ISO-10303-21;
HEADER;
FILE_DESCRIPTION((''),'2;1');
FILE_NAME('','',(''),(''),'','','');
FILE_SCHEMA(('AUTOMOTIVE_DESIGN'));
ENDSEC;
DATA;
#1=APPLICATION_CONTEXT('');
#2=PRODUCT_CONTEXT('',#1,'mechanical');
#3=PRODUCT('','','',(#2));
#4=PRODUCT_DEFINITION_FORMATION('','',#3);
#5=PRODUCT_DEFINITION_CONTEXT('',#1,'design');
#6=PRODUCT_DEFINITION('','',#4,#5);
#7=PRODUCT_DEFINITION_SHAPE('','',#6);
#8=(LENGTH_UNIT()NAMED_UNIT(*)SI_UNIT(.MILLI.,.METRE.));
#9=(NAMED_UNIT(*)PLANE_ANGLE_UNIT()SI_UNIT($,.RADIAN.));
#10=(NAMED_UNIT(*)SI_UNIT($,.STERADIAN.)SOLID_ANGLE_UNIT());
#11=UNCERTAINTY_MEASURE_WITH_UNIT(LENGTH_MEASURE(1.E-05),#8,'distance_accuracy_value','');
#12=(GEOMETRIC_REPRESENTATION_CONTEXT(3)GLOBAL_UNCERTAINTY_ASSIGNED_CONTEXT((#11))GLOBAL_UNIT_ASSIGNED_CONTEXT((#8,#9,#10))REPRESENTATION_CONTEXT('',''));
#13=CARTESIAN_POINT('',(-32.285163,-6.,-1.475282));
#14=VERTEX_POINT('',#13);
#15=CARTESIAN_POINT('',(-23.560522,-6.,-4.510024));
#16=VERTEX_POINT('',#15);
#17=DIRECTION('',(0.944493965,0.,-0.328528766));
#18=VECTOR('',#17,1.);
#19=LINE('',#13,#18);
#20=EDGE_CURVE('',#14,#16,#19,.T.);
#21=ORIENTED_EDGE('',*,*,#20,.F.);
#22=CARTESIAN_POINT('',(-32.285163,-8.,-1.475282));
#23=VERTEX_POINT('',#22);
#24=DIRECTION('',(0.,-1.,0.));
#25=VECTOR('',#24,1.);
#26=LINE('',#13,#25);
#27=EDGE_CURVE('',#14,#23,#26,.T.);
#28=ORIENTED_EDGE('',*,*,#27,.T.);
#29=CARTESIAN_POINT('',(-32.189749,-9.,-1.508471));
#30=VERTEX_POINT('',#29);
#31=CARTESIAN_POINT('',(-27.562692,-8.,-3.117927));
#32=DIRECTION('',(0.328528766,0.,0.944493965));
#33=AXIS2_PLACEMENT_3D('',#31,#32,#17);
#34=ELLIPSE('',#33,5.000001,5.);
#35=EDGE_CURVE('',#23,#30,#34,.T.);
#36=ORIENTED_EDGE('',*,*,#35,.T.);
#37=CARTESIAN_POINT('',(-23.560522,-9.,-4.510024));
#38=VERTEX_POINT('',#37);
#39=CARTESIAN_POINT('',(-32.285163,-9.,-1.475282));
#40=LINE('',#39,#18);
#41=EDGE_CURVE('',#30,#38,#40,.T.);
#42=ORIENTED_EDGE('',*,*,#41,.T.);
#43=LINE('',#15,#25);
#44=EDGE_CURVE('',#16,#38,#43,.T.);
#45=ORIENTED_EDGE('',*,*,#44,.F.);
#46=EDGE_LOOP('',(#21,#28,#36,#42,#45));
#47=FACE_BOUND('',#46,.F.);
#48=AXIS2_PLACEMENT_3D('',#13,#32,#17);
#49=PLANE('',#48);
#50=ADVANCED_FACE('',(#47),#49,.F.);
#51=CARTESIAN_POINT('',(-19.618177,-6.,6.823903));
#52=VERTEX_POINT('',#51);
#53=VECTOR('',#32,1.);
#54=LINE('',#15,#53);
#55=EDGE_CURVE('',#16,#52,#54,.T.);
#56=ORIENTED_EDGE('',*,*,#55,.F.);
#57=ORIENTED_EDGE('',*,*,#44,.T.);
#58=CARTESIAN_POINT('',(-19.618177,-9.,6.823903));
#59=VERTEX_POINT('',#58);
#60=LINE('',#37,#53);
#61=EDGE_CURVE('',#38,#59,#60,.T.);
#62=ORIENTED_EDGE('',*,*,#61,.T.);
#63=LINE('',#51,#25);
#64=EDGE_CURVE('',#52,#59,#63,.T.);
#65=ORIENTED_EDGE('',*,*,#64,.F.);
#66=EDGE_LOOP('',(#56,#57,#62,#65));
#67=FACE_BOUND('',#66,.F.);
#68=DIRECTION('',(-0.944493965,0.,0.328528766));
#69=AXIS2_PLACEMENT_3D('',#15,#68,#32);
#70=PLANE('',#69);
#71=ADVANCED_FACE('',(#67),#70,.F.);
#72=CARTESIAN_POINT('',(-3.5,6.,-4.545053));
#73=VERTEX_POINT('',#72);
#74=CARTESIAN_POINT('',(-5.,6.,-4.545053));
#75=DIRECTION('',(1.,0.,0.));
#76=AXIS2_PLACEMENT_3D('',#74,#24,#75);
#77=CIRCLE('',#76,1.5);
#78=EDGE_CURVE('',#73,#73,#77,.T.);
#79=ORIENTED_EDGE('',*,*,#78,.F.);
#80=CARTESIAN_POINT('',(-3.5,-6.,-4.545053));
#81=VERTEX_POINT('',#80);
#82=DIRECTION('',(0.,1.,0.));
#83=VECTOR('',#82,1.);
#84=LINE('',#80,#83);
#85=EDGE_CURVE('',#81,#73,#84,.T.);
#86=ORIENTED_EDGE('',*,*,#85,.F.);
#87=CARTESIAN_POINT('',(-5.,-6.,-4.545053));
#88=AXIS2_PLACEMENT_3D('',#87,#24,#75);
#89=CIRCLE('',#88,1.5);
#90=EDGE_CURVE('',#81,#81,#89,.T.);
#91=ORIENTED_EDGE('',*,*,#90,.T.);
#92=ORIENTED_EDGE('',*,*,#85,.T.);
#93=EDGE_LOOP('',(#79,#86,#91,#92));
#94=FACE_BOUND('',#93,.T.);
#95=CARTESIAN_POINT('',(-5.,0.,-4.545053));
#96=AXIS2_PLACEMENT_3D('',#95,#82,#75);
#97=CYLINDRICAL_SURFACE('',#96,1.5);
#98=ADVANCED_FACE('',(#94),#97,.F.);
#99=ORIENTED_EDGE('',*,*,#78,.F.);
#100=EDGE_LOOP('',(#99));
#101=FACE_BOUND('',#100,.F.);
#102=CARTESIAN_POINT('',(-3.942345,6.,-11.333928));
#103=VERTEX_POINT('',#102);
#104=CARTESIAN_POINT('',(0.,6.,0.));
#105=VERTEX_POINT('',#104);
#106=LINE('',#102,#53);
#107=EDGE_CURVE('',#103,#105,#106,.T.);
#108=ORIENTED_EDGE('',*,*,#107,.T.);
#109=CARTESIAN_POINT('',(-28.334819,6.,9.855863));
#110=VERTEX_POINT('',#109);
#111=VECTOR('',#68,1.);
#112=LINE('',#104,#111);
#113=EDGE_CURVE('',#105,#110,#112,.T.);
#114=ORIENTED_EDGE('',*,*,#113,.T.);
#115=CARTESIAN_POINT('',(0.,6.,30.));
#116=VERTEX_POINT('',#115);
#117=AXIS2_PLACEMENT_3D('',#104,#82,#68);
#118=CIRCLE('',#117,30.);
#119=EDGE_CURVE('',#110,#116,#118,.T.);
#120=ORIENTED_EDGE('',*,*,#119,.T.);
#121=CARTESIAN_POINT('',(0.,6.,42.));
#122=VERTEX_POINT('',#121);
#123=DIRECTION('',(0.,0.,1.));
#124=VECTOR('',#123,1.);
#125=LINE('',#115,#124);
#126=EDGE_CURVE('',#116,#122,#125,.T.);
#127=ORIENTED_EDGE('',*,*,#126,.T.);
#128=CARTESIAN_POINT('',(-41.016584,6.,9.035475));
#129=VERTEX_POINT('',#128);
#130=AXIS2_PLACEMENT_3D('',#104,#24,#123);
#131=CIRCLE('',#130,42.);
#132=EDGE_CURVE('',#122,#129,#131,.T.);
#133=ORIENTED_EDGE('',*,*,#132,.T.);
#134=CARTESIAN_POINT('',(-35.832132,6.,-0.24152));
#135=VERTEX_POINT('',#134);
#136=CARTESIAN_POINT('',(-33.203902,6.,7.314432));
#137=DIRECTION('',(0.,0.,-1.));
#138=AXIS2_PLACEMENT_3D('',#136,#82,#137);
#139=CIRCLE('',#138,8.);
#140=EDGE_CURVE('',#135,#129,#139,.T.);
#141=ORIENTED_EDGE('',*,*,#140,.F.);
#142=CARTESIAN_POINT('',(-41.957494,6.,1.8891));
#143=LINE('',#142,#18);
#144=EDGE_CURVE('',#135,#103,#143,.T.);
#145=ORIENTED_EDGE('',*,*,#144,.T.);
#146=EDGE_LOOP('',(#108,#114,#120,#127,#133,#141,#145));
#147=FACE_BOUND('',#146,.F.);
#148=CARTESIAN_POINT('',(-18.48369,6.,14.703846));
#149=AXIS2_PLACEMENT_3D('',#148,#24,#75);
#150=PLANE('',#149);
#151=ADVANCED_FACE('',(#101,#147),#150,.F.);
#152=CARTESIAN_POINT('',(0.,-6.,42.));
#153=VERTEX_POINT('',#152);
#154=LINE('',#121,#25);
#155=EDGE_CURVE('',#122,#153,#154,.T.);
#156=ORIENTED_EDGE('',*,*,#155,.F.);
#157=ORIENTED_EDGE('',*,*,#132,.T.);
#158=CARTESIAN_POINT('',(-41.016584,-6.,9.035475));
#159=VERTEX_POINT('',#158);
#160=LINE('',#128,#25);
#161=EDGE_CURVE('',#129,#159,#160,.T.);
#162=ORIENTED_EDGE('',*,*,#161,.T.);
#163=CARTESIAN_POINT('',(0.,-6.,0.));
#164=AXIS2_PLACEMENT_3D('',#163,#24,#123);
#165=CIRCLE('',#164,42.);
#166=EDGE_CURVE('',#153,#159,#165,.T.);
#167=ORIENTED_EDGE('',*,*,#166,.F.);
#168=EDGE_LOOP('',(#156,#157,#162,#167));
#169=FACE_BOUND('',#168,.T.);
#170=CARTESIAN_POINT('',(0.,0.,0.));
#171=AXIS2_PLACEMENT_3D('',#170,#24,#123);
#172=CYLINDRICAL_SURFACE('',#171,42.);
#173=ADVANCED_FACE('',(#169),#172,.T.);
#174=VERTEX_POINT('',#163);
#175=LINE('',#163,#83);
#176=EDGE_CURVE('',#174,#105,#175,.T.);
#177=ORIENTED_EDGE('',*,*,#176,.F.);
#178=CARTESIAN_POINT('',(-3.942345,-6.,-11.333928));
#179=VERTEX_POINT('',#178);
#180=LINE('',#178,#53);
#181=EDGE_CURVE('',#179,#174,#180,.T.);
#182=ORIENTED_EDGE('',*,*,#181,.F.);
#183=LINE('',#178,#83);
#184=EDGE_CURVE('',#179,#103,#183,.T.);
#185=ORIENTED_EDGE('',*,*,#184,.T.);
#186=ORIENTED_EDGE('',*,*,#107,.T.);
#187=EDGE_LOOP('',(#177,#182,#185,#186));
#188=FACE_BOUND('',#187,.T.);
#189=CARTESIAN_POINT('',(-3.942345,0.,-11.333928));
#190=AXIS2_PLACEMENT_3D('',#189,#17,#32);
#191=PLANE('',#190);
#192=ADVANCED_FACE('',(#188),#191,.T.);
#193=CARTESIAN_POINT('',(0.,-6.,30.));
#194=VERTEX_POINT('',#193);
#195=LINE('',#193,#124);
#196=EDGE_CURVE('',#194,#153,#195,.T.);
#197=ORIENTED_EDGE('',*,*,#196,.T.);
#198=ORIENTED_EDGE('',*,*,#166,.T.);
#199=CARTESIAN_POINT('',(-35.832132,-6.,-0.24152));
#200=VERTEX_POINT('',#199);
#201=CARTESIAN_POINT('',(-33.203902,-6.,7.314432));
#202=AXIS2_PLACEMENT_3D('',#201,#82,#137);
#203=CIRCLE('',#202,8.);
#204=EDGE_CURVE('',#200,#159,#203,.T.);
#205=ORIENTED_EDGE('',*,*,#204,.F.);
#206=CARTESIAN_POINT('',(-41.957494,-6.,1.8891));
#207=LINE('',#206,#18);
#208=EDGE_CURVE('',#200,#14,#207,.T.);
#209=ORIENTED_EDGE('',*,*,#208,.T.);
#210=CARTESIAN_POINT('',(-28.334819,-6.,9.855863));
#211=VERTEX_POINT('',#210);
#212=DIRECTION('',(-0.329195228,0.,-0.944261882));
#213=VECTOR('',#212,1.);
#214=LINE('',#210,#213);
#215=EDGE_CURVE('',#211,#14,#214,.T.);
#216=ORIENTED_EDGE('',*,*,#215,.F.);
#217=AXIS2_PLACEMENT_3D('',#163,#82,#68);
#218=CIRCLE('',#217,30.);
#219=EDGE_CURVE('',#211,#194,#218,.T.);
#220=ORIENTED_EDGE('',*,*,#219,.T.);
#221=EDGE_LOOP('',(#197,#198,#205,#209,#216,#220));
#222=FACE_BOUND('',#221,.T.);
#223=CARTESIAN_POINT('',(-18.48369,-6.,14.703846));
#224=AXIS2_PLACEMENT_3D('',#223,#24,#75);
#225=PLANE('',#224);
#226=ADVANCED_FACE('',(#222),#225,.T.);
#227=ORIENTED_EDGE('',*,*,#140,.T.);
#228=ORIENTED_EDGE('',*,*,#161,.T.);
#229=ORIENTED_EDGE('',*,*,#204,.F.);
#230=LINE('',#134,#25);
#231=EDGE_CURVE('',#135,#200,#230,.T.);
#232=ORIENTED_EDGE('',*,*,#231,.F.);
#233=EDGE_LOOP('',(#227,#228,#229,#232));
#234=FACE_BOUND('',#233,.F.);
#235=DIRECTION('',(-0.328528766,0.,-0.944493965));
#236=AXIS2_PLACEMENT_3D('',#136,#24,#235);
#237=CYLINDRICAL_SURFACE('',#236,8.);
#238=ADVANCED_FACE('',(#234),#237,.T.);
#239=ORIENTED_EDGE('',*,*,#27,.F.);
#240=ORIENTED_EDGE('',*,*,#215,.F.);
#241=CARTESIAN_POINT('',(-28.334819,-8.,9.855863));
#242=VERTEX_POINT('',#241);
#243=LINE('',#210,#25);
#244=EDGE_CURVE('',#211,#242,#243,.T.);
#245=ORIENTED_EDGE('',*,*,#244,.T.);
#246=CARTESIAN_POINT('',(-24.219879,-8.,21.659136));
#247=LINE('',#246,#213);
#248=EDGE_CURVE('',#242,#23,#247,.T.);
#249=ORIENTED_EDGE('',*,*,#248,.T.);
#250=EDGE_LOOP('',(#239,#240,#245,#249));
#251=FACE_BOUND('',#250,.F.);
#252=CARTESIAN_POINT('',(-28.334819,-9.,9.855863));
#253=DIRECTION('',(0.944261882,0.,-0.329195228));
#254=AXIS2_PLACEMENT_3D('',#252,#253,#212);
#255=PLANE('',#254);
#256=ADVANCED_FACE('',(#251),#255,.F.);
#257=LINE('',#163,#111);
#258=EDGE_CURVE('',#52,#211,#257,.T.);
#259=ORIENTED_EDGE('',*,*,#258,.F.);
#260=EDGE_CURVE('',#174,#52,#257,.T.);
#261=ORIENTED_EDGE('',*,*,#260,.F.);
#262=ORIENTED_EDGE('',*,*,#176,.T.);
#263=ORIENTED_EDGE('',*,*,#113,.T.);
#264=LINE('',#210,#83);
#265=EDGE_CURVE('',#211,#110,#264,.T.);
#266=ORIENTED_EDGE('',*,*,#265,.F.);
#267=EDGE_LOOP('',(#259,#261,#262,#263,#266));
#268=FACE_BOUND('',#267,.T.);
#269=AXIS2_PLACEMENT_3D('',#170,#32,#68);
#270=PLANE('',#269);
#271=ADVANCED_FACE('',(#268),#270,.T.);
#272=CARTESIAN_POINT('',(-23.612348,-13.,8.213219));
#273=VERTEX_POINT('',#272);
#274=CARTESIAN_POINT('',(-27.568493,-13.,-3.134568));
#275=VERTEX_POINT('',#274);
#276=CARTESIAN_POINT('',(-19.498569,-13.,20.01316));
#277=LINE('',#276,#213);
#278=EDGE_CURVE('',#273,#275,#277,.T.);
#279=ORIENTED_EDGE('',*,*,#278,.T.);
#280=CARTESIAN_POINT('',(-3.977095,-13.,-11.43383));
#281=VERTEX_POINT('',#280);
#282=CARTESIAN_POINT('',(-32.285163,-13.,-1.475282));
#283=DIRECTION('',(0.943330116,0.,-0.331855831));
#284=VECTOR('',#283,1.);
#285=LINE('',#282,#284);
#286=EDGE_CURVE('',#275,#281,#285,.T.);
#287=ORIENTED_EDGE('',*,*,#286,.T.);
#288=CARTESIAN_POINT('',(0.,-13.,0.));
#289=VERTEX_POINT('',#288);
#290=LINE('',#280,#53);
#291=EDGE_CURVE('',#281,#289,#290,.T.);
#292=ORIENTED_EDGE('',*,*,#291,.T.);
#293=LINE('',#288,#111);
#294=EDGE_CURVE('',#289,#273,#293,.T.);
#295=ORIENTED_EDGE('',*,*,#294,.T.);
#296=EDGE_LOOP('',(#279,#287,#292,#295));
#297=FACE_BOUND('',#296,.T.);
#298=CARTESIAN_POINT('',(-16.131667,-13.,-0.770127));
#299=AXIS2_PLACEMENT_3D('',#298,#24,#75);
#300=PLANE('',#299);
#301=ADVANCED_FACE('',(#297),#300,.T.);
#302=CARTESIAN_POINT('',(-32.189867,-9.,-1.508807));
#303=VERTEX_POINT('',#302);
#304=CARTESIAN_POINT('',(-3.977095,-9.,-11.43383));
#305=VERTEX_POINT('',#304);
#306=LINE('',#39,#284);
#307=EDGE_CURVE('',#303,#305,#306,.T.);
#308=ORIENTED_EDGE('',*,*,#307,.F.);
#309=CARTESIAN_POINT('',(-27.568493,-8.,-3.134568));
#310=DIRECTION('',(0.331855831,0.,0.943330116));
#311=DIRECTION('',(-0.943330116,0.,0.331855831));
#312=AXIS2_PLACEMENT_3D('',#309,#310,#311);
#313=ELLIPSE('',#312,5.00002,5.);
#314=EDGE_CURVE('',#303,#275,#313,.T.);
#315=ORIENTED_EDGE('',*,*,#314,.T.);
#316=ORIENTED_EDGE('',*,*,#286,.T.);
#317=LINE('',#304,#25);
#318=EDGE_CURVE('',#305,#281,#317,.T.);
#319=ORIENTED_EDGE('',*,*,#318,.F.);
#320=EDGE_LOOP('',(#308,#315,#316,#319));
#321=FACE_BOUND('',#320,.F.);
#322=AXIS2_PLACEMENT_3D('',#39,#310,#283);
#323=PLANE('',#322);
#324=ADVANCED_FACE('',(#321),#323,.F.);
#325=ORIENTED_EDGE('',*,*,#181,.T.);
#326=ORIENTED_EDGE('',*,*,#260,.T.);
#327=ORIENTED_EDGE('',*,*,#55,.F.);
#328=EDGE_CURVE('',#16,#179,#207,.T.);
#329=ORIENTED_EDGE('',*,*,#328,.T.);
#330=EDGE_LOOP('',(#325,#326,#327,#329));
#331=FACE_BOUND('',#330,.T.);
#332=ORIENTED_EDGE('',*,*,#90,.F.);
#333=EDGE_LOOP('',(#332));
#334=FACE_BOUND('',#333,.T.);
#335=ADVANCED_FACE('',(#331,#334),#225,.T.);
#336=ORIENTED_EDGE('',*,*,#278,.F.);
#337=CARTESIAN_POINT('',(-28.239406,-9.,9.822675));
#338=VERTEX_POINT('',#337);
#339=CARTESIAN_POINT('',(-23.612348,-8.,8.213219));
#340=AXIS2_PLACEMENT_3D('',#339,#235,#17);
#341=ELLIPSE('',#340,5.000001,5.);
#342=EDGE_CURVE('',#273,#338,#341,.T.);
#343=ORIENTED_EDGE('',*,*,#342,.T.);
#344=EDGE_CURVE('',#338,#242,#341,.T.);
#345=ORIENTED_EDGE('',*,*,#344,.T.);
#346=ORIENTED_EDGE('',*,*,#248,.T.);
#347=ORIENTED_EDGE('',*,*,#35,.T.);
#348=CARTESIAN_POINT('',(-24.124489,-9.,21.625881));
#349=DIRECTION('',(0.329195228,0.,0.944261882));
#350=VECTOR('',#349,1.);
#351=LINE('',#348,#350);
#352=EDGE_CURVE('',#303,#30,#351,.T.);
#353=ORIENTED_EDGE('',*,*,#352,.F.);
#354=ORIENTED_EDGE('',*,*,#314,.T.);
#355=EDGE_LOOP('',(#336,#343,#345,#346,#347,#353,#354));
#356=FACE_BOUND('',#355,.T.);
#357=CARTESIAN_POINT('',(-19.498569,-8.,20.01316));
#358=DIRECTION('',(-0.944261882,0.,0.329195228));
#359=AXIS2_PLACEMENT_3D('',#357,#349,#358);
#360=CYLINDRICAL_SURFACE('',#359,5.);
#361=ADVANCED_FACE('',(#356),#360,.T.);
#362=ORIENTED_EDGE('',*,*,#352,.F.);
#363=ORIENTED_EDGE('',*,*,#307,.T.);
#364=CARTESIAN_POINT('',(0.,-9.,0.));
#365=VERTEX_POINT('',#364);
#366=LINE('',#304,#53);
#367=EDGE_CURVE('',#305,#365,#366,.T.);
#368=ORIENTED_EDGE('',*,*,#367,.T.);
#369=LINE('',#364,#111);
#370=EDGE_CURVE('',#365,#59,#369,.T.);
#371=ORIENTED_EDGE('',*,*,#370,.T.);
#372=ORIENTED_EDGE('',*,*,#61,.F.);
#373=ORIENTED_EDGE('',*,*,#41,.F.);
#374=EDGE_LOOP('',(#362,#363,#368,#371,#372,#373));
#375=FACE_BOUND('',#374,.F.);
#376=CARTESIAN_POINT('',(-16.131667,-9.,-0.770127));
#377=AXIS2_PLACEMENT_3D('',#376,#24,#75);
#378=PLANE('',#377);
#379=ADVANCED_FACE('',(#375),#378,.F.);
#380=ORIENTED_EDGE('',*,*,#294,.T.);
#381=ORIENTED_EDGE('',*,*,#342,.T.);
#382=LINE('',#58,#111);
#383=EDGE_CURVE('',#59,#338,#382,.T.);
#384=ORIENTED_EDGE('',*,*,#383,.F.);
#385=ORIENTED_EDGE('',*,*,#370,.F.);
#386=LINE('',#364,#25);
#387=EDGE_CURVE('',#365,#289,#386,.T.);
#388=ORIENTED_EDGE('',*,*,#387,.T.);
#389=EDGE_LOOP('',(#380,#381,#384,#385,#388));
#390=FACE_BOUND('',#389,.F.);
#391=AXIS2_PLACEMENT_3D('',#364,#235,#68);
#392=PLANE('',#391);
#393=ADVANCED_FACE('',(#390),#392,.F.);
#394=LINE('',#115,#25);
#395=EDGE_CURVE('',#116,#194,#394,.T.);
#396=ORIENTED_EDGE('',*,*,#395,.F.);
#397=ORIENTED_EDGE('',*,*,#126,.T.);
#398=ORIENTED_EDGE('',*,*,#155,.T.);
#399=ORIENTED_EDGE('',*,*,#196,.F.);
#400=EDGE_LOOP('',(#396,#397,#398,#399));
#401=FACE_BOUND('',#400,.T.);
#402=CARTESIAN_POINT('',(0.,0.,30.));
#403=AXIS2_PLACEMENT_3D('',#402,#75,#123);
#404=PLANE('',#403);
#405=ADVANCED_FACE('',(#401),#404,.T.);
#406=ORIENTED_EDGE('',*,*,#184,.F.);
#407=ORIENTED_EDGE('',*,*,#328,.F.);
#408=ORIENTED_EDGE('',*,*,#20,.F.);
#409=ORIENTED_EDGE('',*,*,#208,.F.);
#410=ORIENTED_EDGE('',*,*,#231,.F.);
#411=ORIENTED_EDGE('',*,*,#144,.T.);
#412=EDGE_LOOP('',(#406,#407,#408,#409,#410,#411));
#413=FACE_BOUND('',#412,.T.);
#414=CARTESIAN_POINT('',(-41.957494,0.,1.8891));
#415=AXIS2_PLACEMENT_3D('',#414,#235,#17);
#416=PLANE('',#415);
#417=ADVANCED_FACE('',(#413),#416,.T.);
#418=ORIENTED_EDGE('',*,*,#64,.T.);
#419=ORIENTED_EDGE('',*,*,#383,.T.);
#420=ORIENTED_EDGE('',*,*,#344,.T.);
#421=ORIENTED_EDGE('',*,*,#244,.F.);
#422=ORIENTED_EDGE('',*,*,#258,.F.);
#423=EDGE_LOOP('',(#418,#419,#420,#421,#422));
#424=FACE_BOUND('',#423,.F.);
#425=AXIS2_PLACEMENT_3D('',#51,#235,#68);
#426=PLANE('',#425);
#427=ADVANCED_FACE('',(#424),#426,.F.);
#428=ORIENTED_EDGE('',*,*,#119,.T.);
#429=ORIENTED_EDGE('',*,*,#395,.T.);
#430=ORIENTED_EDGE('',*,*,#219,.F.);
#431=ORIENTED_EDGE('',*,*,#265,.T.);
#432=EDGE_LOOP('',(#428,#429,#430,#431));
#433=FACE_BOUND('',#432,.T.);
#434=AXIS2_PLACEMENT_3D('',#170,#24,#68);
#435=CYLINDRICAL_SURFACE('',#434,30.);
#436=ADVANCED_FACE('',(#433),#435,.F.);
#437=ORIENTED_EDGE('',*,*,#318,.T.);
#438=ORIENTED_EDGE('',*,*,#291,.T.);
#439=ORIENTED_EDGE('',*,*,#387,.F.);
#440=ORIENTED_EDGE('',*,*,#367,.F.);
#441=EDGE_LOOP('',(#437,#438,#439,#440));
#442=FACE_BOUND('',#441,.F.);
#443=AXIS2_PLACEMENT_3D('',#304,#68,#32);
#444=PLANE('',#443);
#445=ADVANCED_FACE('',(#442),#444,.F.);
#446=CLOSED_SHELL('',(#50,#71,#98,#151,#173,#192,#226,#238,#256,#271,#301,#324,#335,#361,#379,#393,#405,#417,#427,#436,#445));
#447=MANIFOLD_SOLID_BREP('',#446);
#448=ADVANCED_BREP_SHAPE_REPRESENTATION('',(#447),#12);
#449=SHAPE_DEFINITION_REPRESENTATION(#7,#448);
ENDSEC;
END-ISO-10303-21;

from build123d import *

# Parameters (mm, degrees)
F0_R        = 1.5
F1_DEPTH    = 6
F3_DEPTH    = 3
F5_DEPTH    = 4
F6_R        = 8
F7_T1_DEPTH = 37.0000029882


# Not quite as in the source:
# - a fillet or chamfer that OpenCascade refuses, or shapes differently, is made with other operations: its cross-section is extruded or revolved along the edge and cut away or added


with BuildPart() as f1:
    # F0 (on Front) → F1 (new body, symmetric)
    with BuildSketch(Plane.XZ):
        with BuildLine():
            ThreePointArc((-28.3348189516, 9.855862975), (-17.3828091911, 24.4507248282), (0, 30))
            Line((0, 30), (0, 42))
            ThreePointArc((0, 42), (-29.0229029625, 30.3590366057), (-41.9574939735, 1.8891001728))
            Line((-41.9574939735, 1.8891001728), (-3.94234519, -11.3339275806))
            Line((-3.94234519, -11.3339275806), (0, 0))
            Line((0, 0), (-28.3348189516, 9.855862975))
        make_face()
        with Locations((-5, -4.5450530015)):
            Circle(F0_R, mode=Mode.SUBTRACT)
    extrude(amount=F1_DEPTH, both=True)

    # F2 (on face) → F3 (join)
    with BuildSketch(Plane.XZ.offset(6)):
        Polygon((-19.6181767132, 6.8239031926), (-28.3348189516, 9.855862975), (-32.2851626761, -1.4752824294), (-23.5605219032, -4.5100243881), align=None)
    extrude(amount=F3_DEPTH)

    # F4 (on face) → F5 (join)
    with BuildSketch(Plane.XZ.offset(9)):
        Polygon((0, 0), (-28.3348189516, 9.855862975), (-32.2851626761, -1.4752824294), (-3.9770946697, -11.4338295597), align=None)
    extrude(amount=F5_DEPTH)

    # F6
    f6_edges = [f1.edges().sort_by_distance(p)[0] for p in [
        (-41.957494, 0, 1.8891),
    ]]
    fillet(f6_edges, radius=F6_R)

    # F7: fillet of radius 5 on 1 edges, made by hand

    # F7_s2 → F7_t1 (cut)
    with BuildSketch(Plane(origin=(4.1079708061, 0, 11.783282106), x_dir=(0, 1, 0), z_dir=(-0.3291952284, 0, -0.9442618819))):
        with BuildLine():
            ThreePointArc((-8, -29.9999925295), (-11.5355339059, -28.5355264354), (-13, -24.9999925295))
            Line((-13, -24.9999925295), (-13, -29.9999925295))
            Line((-13, -29.9999925295), (-8, -29.9999925295))
        make_face()
    extrude(amount=F7_T1_DEPTH, mode=Mode.SUBTRACT)


solid = f1.part
